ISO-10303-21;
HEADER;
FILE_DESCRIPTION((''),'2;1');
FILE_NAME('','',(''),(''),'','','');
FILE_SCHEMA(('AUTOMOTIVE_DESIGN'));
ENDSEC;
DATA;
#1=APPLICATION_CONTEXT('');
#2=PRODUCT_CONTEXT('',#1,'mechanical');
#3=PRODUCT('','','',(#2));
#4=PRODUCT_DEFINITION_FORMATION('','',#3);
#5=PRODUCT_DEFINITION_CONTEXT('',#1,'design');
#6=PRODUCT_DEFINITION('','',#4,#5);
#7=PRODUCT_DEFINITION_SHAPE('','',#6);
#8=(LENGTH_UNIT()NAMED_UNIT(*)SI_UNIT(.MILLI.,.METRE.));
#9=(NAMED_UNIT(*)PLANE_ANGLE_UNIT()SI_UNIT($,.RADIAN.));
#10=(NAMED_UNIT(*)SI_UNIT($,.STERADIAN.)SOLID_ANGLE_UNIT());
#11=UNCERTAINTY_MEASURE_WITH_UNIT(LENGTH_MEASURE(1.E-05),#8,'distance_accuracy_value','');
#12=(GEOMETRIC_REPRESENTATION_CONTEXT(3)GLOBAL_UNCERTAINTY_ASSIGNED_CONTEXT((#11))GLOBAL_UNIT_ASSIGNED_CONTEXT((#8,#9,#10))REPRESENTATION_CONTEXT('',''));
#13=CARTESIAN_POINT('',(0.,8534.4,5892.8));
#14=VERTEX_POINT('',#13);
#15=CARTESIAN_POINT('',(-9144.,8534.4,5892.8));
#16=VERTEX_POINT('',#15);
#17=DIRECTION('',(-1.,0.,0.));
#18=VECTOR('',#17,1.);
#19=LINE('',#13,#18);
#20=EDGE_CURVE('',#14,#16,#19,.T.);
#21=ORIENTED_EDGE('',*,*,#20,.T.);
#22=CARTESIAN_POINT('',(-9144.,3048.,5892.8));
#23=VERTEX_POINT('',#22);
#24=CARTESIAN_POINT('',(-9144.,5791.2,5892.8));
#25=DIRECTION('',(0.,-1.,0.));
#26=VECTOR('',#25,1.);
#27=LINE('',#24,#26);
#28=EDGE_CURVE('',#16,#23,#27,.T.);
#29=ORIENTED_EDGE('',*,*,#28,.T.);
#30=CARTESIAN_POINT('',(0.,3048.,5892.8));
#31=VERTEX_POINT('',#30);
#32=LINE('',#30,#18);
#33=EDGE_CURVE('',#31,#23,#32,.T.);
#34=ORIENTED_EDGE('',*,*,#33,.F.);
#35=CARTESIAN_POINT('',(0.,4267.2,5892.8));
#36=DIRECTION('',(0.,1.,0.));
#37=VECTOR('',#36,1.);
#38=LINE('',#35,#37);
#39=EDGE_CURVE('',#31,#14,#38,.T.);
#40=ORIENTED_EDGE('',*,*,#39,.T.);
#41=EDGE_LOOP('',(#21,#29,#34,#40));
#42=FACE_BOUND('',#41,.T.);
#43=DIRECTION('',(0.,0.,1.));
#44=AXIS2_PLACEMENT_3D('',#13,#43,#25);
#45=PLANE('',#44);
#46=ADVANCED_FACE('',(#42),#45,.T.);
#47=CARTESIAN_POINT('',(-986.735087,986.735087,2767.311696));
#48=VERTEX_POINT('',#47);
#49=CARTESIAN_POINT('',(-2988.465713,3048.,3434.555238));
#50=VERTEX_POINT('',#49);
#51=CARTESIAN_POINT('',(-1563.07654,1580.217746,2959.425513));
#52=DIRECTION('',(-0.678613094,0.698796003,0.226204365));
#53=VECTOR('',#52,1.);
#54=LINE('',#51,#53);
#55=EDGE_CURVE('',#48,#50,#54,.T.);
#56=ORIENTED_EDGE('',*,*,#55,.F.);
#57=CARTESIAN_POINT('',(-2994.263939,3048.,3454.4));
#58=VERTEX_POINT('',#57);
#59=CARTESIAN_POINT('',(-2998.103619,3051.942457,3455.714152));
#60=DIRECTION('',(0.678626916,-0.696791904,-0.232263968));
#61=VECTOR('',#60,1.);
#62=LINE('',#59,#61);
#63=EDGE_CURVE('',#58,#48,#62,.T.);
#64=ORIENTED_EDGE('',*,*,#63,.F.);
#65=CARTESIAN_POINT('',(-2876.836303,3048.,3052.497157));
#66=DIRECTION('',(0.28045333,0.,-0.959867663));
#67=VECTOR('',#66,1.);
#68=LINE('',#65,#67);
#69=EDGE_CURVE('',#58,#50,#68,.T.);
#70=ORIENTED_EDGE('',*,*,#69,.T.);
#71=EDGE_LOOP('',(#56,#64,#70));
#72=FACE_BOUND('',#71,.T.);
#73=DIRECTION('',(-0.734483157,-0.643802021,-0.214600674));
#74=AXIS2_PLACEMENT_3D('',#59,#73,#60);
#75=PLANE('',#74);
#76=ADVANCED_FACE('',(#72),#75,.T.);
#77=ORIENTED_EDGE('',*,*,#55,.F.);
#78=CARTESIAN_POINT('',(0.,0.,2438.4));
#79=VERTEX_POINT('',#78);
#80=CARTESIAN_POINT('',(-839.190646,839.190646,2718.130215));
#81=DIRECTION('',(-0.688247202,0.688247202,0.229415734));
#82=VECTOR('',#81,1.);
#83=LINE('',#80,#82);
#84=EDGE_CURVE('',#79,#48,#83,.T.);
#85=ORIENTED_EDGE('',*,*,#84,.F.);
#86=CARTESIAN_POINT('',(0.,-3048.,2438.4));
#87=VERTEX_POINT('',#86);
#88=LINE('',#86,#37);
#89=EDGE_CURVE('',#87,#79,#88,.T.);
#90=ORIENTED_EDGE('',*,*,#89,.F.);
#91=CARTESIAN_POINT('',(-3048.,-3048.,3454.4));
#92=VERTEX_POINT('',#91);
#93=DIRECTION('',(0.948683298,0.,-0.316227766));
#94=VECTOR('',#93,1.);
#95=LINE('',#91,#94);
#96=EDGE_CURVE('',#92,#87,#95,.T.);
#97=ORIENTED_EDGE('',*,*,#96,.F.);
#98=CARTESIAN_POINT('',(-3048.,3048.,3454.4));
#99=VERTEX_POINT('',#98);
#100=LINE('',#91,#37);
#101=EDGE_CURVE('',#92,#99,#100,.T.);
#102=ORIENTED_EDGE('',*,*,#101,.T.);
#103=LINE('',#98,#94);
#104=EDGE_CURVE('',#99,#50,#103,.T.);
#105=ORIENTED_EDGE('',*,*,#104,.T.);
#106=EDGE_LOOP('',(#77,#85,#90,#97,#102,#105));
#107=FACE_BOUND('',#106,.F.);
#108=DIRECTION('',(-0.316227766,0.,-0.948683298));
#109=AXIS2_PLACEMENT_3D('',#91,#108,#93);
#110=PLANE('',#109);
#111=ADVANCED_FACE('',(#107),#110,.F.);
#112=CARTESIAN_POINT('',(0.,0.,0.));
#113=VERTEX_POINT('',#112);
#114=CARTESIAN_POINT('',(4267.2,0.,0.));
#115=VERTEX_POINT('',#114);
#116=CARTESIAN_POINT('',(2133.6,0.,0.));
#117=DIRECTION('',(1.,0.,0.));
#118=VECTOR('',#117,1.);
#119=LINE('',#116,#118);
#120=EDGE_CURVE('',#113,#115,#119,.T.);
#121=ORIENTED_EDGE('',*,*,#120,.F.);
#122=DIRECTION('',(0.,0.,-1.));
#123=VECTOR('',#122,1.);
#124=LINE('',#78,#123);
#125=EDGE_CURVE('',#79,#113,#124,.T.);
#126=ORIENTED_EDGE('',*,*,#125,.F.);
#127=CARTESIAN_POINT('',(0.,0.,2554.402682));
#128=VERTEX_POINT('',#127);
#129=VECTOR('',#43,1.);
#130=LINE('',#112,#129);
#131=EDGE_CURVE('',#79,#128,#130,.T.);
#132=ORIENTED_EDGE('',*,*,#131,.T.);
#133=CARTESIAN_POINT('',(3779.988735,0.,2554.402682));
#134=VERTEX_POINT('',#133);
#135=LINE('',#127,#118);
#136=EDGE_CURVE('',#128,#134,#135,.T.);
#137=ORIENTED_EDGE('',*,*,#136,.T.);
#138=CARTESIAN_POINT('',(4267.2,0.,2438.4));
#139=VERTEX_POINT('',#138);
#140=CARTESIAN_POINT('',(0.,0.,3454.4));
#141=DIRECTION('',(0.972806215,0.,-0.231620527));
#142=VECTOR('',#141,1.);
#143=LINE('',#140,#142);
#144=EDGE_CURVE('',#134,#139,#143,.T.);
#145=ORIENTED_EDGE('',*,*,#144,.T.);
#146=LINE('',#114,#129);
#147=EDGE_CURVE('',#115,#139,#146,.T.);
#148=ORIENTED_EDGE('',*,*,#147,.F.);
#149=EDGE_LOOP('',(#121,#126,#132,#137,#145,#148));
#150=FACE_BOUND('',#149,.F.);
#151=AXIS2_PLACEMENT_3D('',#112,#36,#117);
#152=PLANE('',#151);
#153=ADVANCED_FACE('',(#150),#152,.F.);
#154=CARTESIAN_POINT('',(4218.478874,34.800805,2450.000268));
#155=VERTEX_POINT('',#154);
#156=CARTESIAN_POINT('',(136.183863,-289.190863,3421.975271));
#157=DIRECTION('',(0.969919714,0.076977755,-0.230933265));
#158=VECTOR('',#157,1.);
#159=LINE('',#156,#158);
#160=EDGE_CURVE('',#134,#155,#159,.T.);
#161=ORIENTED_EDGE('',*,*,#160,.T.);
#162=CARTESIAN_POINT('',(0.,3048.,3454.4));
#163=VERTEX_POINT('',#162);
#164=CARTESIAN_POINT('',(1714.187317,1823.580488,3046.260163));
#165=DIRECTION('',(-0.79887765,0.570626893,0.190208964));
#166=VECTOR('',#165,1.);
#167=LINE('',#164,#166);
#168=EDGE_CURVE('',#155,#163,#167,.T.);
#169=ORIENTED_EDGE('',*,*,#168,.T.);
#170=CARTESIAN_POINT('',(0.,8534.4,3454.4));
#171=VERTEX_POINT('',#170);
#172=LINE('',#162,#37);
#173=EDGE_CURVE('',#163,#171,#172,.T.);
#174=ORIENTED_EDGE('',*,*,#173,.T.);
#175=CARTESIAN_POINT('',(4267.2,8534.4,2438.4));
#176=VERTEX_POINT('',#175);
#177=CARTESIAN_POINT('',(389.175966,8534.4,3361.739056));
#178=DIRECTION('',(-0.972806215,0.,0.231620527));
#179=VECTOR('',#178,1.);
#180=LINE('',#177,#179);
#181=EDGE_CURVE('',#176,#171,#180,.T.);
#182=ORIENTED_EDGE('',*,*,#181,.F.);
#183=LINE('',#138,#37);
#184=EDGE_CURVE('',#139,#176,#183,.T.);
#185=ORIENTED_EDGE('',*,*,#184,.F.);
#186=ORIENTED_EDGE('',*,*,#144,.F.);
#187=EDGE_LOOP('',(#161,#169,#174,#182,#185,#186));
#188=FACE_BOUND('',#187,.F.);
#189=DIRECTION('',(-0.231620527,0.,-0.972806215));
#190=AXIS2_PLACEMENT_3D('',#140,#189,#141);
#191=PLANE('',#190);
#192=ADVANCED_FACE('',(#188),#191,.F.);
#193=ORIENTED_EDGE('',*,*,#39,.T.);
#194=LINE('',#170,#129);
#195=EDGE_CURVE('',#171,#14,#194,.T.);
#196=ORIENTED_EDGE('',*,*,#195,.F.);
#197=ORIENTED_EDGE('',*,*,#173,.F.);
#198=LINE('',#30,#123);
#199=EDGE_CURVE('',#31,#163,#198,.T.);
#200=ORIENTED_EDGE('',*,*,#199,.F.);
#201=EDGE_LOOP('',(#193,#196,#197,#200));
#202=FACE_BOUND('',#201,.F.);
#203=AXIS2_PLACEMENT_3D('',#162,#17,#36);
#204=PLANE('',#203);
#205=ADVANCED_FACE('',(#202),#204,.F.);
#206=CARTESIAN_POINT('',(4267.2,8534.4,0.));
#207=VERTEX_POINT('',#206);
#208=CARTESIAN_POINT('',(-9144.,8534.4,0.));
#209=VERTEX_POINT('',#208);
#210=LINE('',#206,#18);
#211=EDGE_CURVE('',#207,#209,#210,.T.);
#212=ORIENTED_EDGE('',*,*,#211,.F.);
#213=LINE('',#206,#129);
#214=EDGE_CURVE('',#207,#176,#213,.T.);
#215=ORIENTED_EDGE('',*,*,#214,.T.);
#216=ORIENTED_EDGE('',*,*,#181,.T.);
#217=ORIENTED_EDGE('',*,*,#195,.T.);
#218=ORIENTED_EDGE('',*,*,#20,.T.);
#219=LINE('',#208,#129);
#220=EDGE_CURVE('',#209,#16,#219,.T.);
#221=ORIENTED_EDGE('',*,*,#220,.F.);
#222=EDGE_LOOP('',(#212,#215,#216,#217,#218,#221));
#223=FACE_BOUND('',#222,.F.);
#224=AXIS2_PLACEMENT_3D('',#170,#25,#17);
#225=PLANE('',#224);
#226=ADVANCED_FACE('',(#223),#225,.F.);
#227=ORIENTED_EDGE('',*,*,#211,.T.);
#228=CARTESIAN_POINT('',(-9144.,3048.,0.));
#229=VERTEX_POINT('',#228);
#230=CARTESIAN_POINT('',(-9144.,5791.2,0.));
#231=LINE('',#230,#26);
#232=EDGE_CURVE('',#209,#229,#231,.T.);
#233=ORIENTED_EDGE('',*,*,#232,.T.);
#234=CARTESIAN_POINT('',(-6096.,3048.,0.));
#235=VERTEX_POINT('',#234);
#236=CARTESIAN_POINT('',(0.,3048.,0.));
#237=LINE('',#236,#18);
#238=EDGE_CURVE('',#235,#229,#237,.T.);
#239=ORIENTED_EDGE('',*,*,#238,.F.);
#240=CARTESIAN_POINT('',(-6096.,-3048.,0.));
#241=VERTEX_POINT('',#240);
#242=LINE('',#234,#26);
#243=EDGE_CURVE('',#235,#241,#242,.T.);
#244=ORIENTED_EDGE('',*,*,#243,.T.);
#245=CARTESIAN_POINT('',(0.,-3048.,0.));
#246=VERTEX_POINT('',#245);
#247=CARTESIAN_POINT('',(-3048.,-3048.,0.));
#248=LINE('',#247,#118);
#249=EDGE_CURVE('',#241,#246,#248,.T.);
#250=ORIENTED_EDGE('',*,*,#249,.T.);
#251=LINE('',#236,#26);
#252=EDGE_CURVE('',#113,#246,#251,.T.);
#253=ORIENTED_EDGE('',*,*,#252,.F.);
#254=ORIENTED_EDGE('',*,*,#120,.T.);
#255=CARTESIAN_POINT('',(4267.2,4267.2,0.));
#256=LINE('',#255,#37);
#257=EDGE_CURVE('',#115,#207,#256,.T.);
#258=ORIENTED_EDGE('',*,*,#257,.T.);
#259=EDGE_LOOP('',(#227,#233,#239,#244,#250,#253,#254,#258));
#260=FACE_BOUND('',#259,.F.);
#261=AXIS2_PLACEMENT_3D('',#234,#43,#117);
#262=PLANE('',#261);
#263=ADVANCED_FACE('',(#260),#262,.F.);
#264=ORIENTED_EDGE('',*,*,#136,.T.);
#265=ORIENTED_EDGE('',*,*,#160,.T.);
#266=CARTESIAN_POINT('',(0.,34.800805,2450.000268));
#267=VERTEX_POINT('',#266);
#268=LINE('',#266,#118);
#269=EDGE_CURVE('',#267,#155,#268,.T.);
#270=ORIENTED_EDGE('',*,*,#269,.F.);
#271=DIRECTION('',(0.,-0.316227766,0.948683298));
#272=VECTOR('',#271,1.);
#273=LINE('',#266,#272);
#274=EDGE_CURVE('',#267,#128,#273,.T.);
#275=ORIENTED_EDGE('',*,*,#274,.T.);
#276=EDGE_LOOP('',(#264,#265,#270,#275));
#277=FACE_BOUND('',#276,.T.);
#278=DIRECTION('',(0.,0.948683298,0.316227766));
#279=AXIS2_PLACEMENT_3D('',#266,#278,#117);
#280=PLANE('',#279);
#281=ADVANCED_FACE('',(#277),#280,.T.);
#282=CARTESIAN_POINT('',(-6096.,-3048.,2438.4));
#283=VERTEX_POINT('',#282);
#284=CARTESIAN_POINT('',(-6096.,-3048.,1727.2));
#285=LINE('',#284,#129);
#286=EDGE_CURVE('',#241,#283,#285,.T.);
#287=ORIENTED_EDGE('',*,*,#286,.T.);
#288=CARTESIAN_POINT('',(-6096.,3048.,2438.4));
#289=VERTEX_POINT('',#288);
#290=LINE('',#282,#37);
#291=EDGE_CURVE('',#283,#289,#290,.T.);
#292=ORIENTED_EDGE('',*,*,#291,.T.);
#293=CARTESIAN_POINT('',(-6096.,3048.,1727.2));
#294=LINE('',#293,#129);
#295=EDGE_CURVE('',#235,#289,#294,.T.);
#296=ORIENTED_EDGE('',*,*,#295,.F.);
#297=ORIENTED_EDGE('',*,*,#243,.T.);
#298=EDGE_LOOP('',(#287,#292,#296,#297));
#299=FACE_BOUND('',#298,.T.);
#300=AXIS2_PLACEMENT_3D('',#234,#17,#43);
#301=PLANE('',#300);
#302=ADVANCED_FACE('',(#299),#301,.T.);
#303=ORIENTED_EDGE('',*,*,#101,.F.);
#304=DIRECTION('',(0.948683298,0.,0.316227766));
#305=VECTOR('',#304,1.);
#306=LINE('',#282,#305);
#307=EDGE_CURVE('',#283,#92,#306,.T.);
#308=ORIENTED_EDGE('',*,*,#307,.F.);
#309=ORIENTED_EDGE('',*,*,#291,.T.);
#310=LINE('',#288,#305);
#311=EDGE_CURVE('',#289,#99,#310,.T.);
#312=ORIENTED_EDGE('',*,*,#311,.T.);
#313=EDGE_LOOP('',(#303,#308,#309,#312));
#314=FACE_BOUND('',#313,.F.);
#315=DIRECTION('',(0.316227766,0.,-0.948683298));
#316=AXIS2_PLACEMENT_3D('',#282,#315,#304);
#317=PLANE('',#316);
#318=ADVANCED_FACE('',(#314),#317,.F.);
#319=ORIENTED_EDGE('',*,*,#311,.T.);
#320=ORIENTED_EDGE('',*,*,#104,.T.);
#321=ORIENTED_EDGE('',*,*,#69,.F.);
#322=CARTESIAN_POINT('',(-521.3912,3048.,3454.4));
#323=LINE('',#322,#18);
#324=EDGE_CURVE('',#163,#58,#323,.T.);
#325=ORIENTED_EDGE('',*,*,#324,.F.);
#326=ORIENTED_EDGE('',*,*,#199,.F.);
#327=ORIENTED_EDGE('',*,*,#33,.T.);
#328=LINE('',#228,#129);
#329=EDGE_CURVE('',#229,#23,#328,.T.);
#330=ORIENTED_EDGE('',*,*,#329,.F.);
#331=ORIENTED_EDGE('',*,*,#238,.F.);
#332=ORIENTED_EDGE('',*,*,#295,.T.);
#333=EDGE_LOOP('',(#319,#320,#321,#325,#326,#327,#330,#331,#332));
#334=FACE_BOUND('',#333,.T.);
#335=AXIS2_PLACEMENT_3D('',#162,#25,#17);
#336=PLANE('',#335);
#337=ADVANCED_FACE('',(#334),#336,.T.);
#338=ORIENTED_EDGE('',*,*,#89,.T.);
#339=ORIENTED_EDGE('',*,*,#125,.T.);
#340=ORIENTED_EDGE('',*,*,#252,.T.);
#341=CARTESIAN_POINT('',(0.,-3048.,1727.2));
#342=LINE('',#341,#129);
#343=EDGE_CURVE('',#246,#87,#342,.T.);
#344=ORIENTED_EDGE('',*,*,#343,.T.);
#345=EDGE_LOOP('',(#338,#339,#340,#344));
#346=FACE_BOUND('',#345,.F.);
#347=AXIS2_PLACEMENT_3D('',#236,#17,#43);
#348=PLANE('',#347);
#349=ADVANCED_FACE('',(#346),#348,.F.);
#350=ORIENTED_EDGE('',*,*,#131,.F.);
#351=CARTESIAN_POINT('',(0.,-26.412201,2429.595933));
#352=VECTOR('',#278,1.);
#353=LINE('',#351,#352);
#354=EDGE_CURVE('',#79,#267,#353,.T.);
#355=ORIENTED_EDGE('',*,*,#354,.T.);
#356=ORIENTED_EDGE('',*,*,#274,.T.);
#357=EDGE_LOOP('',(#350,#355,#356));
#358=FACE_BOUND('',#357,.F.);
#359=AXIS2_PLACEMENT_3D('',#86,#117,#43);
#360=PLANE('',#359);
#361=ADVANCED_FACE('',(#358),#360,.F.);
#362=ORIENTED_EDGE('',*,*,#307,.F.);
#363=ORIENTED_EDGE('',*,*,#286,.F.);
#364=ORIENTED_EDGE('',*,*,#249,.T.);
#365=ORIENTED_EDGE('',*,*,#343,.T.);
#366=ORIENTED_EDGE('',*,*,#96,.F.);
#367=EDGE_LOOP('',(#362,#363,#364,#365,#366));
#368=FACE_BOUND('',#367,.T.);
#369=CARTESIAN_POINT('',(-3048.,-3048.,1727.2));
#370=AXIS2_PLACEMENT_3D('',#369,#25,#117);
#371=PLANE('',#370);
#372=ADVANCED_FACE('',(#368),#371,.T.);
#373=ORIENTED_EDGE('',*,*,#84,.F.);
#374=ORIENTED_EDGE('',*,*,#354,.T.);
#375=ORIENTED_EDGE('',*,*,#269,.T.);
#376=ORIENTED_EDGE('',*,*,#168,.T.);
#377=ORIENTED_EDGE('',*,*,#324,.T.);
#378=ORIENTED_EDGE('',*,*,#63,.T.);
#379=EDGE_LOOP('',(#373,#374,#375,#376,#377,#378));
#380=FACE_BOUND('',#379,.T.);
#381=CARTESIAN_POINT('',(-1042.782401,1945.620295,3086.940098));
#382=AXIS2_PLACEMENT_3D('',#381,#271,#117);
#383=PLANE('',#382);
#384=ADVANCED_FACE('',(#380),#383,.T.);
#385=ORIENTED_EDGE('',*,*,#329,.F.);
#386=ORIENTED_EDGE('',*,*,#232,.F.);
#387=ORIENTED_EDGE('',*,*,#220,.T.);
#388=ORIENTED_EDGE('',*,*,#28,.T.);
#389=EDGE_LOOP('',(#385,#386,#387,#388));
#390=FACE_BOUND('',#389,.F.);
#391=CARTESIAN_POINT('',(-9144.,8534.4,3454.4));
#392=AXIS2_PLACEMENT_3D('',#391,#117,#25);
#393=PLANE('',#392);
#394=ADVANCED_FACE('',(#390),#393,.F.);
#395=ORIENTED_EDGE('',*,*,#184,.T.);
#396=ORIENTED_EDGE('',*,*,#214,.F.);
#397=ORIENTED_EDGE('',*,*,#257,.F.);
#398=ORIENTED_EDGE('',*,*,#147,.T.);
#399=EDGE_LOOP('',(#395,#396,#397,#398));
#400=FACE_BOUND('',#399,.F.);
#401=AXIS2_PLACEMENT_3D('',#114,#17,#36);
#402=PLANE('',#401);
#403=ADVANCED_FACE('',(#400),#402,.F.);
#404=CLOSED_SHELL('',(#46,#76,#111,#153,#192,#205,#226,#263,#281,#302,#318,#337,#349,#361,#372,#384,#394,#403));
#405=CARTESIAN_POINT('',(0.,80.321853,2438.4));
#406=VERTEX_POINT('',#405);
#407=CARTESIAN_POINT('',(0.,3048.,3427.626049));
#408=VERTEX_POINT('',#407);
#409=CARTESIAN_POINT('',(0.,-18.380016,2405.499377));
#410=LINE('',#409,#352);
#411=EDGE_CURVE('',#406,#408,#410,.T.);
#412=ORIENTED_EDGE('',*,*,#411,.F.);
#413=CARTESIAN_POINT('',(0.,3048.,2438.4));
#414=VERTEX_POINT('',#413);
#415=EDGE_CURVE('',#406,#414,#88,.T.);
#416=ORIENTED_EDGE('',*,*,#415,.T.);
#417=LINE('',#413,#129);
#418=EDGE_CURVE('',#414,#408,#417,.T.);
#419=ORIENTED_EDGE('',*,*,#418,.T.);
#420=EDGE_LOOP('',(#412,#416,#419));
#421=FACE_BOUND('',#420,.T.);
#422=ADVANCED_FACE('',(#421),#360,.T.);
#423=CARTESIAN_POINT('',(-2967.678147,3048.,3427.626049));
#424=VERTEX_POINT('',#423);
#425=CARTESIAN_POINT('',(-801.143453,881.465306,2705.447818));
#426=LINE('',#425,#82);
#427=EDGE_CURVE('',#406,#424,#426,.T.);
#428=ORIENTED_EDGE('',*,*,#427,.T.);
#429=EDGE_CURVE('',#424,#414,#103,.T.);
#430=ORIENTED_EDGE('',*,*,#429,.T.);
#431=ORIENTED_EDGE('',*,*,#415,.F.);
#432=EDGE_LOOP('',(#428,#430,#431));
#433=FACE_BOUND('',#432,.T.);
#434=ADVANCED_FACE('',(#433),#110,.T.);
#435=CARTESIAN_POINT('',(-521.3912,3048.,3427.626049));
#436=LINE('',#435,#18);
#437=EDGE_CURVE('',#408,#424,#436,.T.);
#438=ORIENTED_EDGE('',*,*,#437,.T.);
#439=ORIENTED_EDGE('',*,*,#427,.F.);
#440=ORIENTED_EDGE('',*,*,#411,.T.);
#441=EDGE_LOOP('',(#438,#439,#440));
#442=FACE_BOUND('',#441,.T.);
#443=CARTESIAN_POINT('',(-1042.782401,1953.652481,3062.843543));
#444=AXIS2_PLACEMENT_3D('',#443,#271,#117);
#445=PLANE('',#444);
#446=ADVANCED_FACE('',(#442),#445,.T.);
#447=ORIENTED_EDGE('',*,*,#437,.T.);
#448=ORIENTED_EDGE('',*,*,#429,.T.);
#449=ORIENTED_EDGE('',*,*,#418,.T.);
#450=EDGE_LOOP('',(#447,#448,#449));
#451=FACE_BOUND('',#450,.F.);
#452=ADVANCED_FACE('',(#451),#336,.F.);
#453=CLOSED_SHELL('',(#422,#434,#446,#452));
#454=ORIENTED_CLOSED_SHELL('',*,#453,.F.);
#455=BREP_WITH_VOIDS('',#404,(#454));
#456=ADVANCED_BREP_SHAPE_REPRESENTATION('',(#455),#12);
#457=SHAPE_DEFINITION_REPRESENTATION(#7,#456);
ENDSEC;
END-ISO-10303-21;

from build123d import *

# Parameters (mm, degrees)
F0_W      = 4267.2
F0_H      = 8534.4
F1_DEPTH  = 3454.4
F3_DEPTH  = 12247.14028
F4_W      = 5486.4
F4_H      = 3454.4
F5_DEPTH  = 9144
F6_DEPTH  = 2438.4
F8_W      = 6096
F8_H      = 3454.4
F9_DEPTH  = 6096
F11_DEPTH = 6096
F13_DEPTH = 6096
F16_DEPTH = 25.4
F18_DEPTH = 3511.20794


with BuildPart() as f1:
    # F0 (on Top) → F1 (new body)
    with BuildSketch(Plane.XY):
        with Locations((2133.6, 4267.2)):
            Rectangle(F0_W, F0_H)
    extrude(amount=F1_DEPTH)

    # F2 (on face) → F3 (cut)
    with BuildSketch(Plane.XZ):
        Polygon((0, 3454.4), (4267.2, 2438.4), (4267.2, 3454.4), align=None)
    extrude(amount=-F3_DEPTH, mode=Mode.SUBTRACT)

    # F4 (on face) → F5 (join)
    with BuildSketch(Plane(origin=(0, 0, 0), x_dir=(0, -1, 0), z_dir=(-1, 0, 0))):
        with Locations((-5791.2, 1727.2)):
            Rectangle(F4_W, F4_H)
    extrude(amount=F5_DEPTH)

    # F6 (add): a face of the model
    f6_faces = [f1.faces().sort_by_distance(p)[0] for p in [
        (-4572, 5791.2, 3454.4),
    ]]
    extrude(f6_faces, amount=F6_DEPTH)

    # F8 (on face) → F9 (join)
    with BuildSketch(Plane.XZ.offset(-3048)):
        with Locations((-3048, 1727.2)):
            Rectangle(F8_W, F8_H)
    extrude(amount=F9_DEPTH)

    # F10 (on face) → F11 (cut)
    with BuildSketch(Plane.XZ.offset(3048)):
        Polygon((-6096, 3454.4), (-6096, 2438.4), (-3048, 3454.4), align=None)
    extrude(amount=-F11_DEPTH, mode=Mode.SUBTRACT)

    # F12 (on face) → F13 (cut)
    with BuildSketch(Plane.XZ.offset(3048)):
        Polygon((0, 3454.4), (-3048, 3454.4), (0, 2438.4), align=None)
    extrude(amount=-F13_DEPTH, mode=Mode.SUBTRACT)

    # F15 (on 3pt) → F16 (join)
    with BuildSketch(Plane(origin=(0, -731.52, 2194.56), x_dir=(1, 0, 0), z_dir=(0, -0.316227766, 0.9486832981))):
        Polygon((-2998.1036186218, 3988.1196022034), (0, 743.2488799095), (0, 3988.1196022034), align=None)
    extrude(amount=-F16_DEPTH)

    # F17 (on 3pt) → F18 (cut)
    with BuildSketch(Plane(origin=(0, -731.52, 2194.56), x_dir=(1, 0, 0), z_dir=(0, -0.316227766, 0.9486832981))):
        Polygon((0, 3984.4744205475), (0, 807.7730536461), (4260.7135772705, 807.7730536461), align=None)
    extrude(amount=F18_DEPTH, mode=Mode.SUBTRACT)


solid = f1.part
